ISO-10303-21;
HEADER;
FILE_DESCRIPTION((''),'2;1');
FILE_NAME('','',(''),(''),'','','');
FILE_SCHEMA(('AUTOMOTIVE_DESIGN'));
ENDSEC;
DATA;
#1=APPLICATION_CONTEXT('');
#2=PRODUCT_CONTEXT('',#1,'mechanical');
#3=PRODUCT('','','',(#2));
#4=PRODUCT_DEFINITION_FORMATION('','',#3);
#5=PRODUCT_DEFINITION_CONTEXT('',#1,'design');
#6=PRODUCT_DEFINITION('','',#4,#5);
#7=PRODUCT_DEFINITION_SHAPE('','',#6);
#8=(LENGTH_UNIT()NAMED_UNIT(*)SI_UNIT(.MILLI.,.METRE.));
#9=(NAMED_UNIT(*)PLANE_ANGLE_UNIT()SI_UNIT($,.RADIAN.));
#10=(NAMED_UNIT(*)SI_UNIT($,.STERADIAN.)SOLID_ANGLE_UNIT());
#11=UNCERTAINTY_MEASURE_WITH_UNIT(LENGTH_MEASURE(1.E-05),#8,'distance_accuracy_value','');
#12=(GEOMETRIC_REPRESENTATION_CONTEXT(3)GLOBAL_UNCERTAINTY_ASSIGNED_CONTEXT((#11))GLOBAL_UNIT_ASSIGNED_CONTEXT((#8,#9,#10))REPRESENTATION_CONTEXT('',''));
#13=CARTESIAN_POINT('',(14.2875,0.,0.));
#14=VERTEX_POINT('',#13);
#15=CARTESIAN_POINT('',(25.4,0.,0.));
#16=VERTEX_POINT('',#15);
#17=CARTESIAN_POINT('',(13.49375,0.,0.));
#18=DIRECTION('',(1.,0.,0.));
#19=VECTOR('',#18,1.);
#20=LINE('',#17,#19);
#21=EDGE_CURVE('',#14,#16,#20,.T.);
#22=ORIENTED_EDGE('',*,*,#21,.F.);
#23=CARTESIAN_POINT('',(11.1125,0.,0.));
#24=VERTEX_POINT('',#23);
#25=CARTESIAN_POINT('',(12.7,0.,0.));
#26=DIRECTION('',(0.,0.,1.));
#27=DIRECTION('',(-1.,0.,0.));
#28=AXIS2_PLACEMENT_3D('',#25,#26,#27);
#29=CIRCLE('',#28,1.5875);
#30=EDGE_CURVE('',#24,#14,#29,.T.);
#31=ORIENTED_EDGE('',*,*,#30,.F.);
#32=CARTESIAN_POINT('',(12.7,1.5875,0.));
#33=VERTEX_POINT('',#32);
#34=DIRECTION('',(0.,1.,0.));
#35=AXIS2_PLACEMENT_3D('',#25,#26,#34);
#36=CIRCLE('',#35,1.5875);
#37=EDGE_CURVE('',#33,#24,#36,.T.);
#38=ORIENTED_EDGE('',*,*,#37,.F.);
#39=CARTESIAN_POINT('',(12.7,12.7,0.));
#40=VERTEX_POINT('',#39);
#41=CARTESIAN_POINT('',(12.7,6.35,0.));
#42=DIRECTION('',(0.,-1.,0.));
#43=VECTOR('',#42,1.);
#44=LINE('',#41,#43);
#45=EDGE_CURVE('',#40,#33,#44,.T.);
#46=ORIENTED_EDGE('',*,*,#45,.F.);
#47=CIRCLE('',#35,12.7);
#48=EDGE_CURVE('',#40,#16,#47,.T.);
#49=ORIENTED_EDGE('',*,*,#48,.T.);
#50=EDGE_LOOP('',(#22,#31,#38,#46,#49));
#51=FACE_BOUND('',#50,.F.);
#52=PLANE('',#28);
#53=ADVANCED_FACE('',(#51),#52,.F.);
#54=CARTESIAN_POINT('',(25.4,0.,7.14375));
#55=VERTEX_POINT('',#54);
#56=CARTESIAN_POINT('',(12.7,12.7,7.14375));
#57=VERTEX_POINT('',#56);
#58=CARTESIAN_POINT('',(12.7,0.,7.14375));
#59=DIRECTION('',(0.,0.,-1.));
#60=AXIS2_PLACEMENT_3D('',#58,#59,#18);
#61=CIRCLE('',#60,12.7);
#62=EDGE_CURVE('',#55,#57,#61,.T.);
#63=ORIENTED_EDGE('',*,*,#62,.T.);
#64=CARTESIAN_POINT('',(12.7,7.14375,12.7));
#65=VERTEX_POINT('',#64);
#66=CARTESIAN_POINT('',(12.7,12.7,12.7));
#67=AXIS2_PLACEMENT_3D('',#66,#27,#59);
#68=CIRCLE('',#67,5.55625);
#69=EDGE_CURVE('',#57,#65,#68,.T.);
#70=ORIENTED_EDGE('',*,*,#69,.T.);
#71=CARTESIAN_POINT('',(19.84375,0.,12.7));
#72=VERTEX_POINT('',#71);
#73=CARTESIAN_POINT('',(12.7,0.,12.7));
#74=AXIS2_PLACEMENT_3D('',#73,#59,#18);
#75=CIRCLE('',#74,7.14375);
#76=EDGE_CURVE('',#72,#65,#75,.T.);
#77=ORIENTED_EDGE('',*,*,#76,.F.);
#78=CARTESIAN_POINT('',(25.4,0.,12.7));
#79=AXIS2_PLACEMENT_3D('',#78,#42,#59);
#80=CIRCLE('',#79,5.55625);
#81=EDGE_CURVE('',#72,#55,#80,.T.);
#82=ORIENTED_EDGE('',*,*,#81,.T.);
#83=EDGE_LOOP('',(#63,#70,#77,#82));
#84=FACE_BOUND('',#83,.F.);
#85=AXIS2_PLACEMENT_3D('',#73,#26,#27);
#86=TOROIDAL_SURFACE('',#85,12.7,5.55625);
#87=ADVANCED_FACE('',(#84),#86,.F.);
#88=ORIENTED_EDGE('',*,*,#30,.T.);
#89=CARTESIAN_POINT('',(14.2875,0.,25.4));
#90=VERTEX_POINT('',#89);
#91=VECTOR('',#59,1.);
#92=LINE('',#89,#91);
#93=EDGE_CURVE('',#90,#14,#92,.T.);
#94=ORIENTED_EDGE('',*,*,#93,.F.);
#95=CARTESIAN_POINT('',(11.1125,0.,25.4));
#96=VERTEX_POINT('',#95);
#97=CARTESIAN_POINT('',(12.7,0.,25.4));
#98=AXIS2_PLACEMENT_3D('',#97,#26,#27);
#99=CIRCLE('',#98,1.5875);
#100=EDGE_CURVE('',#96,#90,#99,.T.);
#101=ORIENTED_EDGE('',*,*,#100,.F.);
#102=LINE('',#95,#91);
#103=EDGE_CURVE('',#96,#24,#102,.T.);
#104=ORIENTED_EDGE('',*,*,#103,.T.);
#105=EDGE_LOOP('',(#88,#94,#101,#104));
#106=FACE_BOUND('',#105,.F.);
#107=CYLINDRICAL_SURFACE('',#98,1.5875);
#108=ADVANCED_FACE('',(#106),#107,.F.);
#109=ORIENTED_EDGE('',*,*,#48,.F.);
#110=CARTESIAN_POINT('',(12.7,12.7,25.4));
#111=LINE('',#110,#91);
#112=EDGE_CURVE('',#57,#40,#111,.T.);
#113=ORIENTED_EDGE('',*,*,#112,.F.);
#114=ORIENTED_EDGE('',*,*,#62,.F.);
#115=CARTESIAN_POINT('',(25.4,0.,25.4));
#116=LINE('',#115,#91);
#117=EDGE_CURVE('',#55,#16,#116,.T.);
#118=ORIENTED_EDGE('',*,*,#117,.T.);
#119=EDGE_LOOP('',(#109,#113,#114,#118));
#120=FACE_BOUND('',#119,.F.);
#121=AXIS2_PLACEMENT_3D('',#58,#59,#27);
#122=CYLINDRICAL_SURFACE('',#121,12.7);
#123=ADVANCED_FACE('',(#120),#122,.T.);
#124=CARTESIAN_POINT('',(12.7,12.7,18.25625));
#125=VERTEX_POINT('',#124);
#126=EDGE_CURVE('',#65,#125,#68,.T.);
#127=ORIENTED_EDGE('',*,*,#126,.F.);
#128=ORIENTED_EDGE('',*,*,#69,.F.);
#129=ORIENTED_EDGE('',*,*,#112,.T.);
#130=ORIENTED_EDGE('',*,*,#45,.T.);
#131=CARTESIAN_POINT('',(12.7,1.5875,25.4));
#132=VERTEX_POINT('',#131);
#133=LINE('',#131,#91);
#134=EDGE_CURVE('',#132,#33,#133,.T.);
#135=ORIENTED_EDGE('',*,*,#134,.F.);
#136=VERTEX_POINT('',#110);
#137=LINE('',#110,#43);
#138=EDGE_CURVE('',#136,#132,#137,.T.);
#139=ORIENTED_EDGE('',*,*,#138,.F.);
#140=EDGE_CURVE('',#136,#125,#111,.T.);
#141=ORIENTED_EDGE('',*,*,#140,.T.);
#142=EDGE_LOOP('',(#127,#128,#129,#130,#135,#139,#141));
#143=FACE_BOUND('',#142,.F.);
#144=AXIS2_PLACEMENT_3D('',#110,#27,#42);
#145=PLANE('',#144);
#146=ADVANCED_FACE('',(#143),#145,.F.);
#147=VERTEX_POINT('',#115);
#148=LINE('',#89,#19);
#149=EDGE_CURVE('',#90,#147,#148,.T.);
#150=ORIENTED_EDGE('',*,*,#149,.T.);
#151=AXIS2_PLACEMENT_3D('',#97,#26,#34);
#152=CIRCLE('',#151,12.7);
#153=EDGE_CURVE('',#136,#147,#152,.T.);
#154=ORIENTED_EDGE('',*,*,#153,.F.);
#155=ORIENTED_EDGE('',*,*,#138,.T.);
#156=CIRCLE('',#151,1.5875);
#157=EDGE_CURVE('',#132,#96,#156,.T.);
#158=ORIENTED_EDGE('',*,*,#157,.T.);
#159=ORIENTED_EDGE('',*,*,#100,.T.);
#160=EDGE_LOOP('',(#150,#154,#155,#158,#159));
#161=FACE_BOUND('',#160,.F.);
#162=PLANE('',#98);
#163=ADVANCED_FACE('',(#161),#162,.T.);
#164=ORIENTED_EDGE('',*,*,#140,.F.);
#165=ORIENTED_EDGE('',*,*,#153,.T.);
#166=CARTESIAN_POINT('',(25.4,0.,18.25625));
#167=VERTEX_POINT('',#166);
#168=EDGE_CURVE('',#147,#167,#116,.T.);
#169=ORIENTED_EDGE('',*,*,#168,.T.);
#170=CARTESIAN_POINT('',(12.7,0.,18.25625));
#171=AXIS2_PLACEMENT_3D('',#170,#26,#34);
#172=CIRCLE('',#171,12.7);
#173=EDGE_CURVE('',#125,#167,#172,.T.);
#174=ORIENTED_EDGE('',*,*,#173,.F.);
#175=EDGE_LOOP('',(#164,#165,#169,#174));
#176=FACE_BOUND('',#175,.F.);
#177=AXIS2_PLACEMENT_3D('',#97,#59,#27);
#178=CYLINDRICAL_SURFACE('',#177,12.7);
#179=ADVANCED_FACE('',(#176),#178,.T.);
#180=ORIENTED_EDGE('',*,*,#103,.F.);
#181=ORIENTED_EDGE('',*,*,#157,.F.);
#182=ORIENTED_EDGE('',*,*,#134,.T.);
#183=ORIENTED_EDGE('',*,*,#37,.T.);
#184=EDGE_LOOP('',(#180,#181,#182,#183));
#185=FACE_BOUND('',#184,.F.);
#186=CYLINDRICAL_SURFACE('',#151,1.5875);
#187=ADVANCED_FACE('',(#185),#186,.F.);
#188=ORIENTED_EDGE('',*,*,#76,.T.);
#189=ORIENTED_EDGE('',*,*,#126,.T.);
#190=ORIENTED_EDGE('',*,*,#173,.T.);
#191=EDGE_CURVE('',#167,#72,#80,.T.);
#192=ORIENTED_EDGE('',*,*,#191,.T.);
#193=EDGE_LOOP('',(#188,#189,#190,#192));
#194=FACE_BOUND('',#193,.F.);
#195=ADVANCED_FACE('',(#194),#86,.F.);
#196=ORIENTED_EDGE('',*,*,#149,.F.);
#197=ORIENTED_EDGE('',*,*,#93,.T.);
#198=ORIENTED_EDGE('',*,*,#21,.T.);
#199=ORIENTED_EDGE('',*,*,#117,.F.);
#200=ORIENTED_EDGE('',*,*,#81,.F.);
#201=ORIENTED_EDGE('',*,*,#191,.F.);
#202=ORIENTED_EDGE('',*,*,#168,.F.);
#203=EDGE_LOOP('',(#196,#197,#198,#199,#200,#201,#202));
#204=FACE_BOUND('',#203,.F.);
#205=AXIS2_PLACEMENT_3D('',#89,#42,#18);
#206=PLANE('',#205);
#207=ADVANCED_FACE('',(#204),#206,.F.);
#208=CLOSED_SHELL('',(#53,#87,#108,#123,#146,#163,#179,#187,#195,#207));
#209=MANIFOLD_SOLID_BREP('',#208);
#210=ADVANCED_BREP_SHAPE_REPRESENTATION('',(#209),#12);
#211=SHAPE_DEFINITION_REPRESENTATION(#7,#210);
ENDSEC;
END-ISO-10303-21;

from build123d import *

# Parameters (mm, degrees)
F3_DEPTH = 25.401


with BuildPart() as f1:
    # F0 (on Front) → F1 (revolve)
    with BuildSketch(Plane.XZ):
        with BuildLine():
            Line((0, 7.14375), (0, 0))
            Line((0, 0), (12.7, 0))
            Line((12.7, 0), (12.7, 25.4))
            Line((12.7, 25.4), (0, 25.4))
            Line((0, 25.4), (0, 18.25625))
            ThreePointArc((0, 18.25625), (3.928862053, 16.628862053), (5.55625, 12.7))
            ThreePointArc((5.55625, 12.7), (3.928862053, 8.771137947), (0, 7.14375))
        make_face()
    revolve(axis=Axis((12.7, 0, 12.7), (0, 0, 1)))

    # F2 (on face) → F3 (cut, through all)
    with BuildSketch(Plane.XY.offset(25.4)):
        with BuildLine():
            Line((12.7, 1.5875), (12.7, 0))
            Line((12.7, 0), (14.2875, 0))
            ThreePointArc((14.2875, 0), (13.8225320151, 1.1225320151), (12.7, 1.5875))
        make_face()
        with BuildLine():
            Line((14.2875, 0), (12.7, 0))
            Line((12.7, 0), (11.1125, 0))
            ThreePointArc((11.1125, 0), (12.7, -1.5875), (14.2875, 0))
        make_face()
        with BuildLine():
            Line((11.1125, 0), (12.7, 0))
            Line((12.7, 0), (12.7, 1.5875))
            ThreePointArc((12.7, 1.5875), (11.5774679849, 1.1225320151), (11.1125, 0))
        make_face()
        with BuildLine():
            ThreePointArc((12.7, 1.5875), (13.8225320151, 1.1225320151), (14.2875, 0))
            Line((14.2875, 0), (25.4, 0))
            ThreePointArc((25.4, 0), (21.6802561211, 8.9802561211), (12.7, 12.7))
            Line((12.7, 12.7), (12.7, 1.5875))
        make_face()
    extrude(amount=-F3_DEPTH, mode=Mode.SUBTRACT)


solid = f1.part
